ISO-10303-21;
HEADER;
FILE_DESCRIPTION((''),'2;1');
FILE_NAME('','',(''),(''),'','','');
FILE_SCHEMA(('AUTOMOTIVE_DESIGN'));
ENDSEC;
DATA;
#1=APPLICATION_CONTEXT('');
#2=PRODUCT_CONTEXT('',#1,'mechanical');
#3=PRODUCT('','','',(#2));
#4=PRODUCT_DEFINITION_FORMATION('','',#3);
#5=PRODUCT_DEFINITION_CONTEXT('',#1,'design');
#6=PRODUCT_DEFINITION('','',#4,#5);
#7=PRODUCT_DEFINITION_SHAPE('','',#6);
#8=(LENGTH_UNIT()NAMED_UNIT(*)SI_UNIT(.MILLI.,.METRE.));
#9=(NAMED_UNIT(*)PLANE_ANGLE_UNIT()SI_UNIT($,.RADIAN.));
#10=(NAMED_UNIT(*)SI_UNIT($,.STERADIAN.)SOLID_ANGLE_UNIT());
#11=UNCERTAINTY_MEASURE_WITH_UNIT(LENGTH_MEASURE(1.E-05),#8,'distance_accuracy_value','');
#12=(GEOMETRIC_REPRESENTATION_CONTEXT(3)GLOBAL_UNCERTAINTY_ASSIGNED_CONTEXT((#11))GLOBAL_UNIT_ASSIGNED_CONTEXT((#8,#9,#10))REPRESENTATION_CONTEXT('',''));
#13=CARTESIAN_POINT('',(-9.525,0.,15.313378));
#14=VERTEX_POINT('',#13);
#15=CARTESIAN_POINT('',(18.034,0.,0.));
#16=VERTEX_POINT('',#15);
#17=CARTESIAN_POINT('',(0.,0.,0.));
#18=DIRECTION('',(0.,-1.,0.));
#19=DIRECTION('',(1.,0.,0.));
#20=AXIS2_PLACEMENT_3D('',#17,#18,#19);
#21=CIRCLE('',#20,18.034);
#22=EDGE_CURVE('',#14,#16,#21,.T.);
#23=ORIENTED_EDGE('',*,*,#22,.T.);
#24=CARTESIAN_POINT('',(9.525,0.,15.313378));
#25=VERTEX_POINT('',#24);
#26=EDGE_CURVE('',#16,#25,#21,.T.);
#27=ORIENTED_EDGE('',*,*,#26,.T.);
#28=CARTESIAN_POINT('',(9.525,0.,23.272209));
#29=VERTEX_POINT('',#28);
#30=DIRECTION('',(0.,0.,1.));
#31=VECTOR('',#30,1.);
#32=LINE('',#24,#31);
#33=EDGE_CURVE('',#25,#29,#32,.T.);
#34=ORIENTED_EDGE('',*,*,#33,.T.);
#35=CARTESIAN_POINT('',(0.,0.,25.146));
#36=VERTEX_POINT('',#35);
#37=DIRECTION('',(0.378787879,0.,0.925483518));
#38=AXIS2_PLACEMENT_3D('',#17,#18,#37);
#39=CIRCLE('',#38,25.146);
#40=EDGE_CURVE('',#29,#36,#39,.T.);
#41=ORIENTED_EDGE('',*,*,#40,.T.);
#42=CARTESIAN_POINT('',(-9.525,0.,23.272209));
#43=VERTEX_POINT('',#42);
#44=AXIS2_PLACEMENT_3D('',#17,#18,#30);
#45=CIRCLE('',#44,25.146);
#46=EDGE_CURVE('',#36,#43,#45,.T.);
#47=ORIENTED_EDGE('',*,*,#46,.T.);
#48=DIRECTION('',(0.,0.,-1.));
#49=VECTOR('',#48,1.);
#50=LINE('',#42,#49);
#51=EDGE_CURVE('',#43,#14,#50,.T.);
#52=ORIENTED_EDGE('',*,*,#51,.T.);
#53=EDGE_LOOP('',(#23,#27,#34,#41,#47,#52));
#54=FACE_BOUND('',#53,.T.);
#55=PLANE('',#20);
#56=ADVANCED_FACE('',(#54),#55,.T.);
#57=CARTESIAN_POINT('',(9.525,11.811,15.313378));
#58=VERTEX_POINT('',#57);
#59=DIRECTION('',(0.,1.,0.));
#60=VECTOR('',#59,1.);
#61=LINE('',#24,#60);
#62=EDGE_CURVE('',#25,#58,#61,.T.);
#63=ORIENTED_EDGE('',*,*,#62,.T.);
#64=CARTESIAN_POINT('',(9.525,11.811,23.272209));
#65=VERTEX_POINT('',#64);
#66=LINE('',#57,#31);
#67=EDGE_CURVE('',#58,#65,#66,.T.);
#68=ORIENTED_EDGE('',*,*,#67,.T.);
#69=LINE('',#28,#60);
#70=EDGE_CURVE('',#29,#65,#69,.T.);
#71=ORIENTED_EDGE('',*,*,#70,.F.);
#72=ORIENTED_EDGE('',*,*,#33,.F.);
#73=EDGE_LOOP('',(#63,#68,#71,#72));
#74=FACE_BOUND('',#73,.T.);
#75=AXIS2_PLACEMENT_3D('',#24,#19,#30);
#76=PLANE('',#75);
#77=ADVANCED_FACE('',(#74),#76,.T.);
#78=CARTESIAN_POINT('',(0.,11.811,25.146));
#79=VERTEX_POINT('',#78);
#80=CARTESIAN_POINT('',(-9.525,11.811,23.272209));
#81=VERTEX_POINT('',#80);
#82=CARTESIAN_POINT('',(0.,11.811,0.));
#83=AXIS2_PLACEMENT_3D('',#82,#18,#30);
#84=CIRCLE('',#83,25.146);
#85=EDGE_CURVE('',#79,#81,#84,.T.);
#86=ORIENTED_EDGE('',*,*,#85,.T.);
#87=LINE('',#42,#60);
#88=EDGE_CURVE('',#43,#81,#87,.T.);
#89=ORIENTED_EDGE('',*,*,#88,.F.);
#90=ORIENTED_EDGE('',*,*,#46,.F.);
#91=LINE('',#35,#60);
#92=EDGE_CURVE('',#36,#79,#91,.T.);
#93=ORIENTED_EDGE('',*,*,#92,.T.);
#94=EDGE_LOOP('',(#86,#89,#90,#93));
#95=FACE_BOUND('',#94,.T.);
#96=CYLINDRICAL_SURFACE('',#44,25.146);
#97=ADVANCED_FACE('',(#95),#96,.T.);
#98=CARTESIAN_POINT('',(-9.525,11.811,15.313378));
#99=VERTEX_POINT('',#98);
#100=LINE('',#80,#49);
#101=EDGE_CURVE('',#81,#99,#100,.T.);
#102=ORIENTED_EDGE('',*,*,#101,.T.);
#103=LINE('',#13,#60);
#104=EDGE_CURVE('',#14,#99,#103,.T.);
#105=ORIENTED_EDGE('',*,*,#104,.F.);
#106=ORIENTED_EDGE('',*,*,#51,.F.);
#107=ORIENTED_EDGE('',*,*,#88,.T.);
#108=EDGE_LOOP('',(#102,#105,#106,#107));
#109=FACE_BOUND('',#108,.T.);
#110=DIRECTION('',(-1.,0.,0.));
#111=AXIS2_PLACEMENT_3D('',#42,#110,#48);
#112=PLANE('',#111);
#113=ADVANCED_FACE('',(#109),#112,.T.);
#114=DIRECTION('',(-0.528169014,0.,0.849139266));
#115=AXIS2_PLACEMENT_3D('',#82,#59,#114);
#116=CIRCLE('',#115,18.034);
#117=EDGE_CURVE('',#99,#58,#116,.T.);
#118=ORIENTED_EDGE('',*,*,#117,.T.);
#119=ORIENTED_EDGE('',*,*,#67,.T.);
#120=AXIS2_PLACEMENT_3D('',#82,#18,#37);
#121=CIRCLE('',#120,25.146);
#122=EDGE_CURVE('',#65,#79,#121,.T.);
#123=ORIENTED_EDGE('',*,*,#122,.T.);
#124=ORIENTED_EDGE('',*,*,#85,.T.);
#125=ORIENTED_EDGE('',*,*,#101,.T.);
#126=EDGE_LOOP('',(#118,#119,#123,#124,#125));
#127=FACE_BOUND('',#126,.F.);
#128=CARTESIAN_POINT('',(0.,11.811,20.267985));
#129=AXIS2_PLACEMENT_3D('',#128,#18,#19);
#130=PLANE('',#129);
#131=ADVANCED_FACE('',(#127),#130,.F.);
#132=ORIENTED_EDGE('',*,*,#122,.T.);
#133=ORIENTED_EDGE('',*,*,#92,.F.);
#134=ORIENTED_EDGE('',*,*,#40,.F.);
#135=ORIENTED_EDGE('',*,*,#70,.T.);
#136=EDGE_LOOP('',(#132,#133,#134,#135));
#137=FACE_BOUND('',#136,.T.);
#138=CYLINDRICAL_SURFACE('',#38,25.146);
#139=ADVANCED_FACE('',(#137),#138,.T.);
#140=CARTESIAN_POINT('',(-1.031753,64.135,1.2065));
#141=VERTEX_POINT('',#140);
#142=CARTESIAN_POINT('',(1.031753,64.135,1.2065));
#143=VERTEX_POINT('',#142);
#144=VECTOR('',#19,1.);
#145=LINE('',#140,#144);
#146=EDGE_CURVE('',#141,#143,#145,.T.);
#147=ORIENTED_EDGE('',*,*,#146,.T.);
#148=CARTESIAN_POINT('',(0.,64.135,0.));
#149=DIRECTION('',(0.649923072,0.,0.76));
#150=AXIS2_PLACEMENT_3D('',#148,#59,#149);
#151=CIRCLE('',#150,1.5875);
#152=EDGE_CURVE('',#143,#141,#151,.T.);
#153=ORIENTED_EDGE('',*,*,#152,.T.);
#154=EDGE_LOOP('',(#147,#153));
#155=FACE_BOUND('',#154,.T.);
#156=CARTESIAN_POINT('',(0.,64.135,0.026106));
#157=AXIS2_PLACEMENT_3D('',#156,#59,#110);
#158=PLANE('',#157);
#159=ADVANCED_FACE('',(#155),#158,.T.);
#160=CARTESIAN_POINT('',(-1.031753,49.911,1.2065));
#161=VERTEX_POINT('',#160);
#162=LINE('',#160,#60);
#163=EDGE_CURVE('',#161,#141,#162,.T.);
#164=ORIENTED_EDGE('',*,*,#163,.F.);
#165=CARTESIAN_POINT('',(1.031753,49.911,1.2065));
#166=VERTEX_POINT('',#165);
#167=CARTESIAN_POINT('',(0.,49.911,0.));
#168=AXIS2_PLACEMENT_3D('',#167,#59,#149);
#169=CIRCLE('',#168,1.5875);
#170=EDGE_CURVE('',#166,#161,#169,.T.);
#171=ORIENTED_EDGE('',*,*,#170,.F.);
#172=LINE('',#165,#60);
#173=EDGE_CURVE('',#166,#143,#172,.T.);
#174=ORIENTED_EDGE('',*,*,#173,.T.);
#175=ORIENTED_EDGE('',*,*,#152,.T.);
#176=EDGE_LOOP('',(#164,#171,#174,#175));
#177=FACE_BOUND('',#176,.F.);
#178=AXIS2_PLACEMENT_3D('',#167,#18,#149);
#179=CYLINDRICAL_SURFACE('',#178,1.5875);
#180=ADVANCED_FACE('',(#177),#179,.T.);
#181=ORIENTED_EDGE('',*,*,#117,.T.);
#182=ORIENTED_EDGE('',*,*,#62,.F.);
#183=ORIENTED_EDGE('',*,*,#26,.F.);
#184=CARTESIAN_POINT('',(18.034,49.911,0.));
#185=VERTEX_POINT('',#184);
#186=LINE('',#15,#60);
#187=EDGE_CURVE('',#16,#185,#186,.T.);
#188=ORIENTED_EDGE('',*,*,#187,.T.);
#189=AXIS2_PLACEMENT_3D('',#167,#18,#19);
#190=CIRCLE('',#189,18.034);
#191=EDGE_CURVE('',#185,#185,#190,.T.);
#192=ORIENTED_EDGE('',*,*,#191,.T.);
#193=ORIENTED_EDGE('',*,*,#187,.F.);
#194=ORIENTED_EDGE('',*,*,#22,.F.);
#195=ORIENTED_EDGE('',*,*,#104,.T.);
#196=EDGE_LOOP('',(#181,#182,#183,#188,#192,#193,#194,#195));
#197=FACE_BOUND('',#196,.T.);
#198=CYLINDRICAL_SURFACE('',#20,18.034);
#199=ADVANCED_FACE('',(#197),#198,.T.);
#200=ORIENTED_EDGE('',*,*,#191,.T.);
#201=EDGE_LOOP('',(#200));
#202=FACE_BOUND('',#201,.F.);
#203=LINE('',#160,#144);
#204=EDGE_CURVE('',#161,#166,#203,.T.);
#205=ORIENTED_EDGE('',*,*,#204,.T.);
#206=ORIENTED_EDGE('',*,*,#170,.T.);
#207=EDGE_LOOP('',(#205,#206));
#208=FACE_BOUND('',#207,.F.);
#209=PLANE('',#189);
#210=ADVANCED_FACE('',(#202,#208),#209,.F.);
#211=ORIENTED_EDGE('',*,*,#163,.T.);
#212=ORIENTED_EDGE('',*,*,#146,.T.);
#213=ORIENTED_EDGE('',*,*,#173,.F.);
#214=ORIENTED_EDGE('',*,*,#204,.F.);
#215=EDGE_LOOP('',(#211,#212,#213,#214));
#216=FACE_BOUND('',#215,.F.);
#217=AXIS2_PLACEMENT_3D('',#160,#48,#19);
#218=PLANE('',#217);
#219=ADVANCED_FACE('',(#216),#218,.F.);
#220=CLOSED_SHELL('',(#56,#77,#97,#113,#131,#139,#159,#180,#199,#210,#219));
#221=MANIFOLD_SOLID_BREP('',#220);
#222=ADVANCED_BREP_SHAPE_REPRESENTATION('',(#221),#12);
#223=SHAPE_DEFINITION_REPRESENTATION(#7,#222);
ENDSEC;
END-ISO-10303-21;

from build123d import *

# Parameters (mm, degrees)
F0_R     = 18.034
F1_DEPTH = 49.911
F3_DEPTH = 11.811
F5_DEPTH = 14.224


with BuildPart() as f1:
    # F0 (on Front) → F1 (new body)
    with BuildSketch(Plane.XZ):
        Circle(F0_R)
    extrude(amount=-F1_DEPTH)

    # F2 (on Front) → F3 (join)
    with BuildSketch(Plane.XZ):
        with BuildLine():
            ThreePointArc((-9.525, 15.3133775177), (0, 18.034), (9.525, 15.3133775177))
            Line((9.525, 15.3133775177), (9.525, 23.2722085544))
            ThreePointArc((9.525, 23.2722085544), (4.8537799544, 24.6731055231), (0, 25.146))
            ThreePointArc((0, 25.146), (-4.8537799544, 24.6731055231), (-9.525, 23.2722085544))
            Line((-9.525, 23.2722085544), (-9.525, 15.3133775177))
        make_face()
    extrude(amount=-F3_DEPTH)

    # F4 (on face) → F5 (join)
    with BuildSketch(Plane(origin=(0, 49.911, 0), x_dir=(-1, 0, 0), z_dir=(0, 1, 0))):
        with BuildLine():
            Line((1.0317528774, 1.2065), (-1.0317528774, 1.2065))
            ThreePointArc((-1.0317528774, 1.2065), (0, -1.5875), (1.0317528774, 1.2065))
        make_face()
    extrude(amount=F5_DEPTH)


solid = f1.part
